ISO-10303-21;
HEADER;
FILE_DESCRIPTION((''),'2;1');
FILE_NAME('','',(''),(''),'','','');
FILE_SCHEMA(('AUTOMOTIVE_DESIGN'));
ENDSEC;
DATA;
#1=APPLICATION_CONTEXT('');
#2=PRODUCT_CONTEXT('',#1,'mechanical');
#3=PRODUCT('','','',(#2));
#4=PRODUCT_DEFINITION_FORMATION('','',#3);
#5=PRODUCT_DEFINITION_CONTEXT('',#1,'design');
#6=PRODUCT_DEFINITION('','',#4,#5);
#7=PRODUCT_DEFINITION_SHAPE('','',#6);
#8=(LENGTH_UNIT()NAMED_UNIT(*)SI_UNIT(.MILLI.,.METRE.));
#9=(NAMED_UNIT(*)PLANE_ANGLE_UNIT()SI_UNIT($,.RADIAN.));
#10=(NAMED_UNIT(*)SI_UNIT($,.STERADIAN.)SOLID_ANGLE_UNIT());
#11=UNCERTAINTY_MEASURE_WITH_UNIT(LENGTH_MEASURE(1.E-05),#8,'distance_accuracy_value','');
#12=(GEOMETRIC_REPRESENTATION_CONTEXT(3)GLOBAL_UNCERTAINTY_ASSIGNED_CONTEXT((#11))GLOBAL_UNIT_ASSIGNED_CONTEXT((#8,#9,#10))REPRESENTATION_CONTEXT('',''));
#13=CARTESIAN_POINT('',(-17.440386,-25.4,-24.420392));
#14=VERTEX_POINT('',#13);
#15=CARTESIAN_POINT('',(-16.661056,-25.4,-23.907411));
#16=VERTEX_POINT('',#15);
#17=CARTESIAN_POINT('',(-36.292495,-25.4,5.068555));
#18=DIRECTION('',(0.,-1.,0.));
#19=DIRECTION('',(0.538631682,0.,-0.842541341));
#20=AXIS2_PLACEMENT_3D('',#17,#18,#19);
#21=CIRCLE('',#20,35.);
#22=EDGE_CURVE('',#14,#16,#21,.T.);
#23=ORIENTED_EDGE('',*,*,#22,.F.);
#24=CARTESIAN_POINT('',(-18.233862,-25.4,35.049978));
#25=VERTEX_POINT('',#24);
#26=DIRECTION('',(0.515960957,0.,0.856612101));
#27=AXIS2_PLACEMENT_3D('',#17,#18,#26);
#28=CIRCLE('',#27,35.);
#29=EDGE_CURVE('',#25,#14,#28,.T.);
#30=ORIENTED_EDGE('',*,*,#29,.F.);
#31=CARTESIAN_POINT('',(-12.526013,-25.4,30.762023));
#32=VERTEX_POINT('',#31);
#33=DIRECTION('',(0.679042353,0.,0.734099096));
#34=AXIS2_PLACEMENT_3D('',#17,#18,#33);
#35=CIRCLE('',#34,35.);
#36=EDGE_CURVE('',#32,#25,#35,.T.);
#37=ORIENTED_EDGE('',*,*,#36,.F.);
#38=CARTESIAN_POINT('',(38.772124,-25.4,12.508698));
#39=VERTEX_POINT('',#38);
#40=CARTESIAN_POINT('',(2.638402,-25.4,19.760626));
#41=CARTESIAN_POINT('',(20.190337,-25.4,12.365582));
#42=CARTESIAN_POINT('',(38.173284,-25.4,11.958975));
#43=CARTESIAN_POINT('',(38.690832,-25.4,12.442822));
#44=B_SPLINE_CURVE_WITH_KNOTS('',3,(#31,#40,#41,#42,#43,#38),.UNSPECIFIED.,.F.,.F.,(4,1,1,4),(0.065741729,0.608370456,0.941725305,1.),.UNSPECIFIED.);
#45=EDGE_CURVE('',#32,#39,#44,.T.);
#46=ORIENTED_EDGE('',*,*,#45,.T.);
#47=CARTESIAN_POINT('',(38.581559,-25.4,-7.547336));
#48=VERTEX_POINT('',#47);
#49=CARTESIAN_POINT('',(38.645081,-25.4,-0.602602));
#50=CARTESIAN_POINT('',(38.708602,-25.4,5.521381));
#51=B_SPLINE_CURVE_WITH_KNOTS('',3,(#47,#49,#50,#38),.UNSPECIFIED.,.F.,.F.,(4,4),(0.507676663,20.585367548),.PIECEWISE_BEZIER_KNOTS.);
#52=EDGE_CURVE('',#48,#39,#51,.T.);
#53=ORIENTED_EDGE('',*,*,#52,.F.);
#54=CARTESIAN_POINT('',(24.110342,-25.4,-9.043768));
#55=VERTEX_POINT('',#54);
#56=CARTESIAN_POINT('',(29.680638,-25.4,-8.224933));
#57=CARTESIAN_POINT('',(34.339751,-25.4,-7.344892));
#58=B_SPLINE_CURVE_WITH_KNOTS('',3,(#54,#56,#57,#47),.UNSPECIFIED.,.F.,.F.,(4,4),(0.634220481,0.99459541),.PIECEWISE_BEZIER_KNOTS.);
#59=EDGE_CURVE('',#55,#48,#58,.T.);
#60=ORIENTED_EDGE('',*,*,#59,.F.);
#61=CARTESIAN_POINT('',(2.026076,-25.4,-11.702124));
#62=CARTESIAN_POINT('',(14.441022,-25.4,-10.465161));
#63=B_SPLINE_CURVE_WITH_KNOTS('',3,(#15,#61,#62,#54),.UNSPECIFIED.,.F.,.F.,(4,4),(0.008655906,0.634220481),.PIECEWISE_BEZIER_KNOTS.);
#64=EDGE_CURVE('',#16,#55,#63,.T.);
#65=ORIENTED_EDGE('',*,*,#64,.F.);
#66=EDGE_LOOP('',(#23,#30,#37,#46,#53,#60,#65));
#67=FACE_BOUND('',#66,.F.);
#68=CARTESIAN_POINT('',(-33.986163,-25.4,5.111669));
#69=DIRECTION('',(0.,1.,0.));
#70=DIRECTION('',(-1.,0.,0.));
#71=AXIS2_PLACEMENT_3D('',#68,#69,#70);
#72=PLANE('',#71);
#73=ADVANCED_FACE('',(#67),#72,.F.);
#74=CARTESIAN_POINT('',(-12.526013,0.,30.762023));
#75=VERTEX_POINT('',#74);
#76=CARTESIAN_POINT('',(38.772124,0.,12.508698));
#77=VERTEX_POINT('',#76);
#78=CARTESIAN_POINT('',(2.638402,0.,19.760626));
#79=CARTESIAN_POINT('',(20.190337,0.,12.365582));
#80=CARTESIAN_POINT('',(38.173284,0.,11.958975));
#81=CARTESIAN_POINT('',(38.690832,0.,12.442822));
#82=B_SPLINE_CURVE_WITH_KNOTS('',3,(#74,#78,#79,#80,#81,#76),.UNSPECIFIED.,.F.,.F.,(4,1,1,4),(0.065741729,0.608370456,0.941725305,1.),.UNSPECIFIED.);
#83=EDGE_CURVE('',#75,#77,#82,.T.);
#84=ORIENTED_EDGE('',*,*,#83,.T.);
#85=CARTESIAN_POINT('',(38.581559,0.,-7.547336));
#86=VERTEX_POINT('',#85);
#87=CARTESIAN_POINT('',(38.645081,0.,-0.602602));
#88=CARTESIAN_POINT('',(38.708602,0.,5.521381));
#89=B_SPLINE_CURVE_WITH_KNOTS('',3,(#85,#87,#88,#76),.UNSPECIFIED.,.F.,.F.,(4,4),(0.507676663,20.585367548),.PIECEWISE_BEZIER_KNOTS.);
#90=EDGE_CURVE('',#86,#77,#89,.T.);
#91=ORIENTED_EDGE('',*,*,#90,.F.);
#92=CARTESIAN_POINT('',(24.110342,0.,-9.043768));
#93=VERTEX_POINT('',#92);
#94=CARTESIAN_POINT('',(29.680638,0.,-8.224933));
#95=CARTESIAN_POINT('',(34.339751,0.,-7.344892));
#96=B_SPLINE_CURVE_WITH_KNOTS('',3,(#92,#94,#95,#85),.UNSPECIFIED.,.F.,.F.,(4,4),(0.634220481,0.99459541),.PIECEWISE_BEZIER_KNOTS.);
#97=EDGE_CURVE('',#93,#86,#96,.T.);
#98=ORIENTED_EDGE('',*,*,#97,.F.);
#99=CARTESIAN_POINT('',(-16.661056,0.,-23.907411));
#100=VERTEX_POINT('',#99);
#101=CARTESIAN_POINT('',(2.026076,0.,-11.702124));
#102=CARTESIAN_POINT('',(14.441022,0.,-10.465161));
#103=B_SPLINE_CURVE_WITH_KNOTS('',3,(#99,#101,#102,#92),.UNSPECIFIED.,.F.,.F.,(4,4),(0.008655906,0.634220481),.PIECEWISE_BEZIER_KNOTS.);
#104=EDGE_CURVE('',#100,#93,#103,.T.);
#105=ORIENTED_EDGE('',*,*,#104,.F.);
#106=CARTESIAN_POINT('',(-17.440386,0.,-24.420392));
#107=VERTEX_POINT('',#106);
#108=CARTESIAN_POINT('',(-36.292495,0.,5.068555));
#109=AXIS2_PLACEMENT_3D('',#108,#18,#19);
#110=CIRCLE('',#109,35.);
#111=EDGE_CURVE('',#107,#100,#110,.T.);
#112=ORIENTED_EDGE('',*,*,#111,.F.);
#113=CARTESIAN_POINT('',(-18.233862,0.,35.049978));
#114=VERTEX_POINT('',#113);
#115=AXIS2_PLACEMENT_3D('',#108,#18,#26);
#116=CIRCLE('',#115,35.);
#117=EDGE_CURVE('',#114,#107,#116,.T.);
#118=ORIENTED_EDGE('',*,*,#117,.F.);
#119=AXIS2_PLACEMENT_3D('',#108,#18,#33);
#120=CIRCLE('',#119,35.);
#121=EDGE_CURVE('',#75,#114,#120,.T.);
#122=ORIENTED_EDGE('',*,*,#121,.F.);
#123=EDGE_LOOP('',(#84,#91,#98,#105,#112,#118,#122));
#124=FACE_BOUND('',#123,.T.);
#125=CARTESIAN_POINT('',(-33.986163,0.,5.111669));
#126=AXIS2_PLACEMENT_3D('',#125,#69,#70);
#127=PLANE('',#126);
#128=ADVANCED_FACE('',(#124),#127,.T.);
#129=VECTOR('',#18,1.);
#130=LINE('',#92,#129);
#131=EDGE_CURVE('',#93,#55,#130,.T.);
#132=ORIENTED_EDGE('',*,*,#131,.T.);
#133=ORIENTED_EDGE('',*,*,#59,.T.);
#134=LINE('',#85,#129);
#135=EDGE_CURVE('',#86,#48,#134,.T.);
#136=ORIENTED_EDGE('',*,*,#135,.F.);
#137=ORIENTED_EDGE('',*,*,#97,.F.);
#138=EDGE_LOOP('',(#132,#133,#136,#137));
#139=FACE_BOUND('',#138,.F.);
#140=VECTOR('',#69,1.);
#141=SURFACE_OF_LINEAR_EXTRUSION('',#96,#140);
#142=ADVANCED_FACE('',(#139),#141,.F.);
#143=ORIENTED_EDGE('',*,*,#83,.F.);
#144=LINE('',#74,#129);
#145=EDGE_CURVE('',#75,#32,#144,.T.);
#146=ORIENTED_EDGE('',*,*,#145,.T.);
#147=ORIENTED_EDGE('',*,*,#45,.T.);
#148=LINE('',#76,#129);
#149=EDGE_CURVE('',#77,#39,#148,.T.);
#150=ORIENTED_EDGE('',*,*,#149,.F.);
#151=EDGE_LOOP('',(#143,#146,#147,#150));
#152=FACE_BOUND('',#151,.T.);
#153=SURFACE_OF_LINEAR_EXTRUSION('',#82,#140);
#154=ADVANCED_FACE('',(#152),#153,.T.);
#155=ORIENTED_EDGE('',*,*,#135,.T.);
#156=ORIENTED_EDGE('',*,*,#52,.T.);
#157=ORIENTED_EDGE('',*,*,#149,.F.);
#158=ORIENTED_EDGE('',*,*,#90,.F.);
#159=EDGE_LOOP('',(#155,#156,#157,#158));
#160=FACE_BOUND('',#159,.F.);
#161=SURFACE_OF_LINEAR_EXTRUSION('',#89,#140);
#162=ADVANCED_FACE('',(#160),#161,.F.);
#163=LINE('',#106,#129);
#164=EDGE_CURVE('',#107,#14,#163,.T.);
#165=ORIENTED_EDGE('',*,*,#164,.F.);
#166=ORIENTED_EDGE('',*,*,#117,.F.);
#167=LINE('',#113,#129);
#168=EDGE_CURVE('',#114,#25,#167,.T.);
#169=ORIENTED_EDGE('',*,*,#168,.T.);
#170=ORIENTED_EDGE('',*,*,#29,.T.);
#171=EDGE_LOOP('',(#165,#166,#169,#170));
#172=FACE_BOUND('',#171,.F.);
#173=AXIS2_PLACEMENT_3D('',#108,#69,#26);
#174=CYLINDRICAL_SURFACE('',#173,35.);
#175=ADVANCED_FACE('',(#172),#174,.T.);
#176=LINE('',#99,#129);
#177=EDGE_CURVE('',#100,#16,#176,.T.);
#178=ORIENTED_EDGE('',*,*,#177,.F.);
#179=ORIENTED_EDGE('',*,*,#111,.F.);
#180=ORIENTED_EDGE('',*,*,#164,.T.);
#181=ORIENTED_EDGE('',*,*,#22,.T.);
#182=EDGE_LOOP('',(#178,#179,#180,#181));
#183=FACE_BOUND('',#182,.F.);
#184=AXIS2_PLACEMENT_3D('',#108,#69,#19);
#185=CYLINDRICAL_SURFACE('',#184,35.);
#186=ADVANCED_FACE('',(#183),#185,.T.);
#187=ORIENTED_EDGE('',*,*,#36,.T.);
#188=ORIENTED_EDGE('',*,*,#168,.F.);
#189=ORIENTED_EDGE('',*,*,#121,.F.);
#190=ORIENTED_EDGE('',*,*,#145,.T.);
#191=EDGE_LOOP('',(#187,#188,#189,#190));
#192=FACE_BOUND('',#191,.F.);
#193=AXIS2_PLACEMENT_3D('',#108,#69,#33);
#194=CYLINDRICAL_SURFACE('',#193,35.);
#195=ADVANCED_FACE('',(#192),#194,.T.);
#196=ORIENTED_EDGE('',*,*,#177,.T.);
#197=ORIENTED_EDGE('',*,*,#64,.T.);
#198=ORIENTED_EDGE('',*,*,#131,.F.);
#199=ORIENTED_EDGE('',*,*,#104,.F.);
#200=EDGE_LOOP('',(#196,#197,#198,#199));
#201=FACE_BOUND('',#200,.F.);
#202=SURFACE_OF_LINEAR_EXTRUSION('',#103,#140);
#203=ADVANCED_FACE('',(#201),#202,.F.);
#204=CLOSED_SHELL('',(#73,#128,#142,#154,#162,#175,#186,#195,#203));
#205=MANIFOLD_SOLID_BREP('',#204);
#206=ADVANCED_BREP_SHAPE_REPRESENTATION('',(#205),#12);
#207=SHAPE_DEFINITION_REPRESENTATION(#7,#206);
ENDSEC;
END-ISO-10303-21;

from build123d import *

# Parameters (mm, degrees)
F1_DEPTH = 25.4


with BuildPart() as f1:
    # F0 (on Front) → F1 (new body)
    with BuildSketch(Plane.XZ):
        with BuildLine():
            add(Edge.make_bspline(
                [(-18.2338618332, 35.049978312), (-16.2634742331, 33.5219960414), (-14.3632449685, 32.0948882514), (-12.5260129681, 30.7620231507)],
                knots=[0, 0, 0, 0, 0.065741729, 0.065741729, 0.065741729, 0.065741729], degree=3))
            ThreePointArc((-18.2338618332, 35.049978312), (-71.2893804123, 4.6016135845), (-17.4403864611, -24.4203921477))
            add(Edge.make_bspline(
                [(-17.4403864611, -24.4203921477), (-17.179402441, -24.2472786453), (-16.9196286438, -24.0762946974), (-16.6610557268, -23.9074107575)],
                knots=[0, 0, 0, 0, 0.0086559059, 0.0086559059, 0.0086559059, 0.0086559059], degree=3))
            ThreePointArc((-16.6610557268, -23.9074107575), (-5.3724339888, -11.3311344475), (-1.2924953236, 5.0685547891))
            ThreePointArc((-1.2924953236, 5.0685547891), (-4.2236094492, 19.0894876674), (-12.5260129681, 30.7620231507))
        make_face()
        with BuildLine():
            ThreePointArc((-12.5260129681, 30.7620231507), (-15.2703232487, 33.0519120082), (-18.2338618332, 35.049978312))
            add(Edge.make_bspline(
                [(-18.2338618332, 35.049978312), (-16.2634742331, 33.5219960414), (-14.3632449685, 32.0948882514), (-12.5260129681, 30.7620231507)],
                knots=[0, 0, 0, 0, 0.065741729, 0.065741729, 0.065741729, 0.065741729], degree=3))
        make_face()
        with BuildLine():
            add(Edge.make_bspline(
                [(-17.4403864611, -24.4203921477), (-17.179402441, -24.2472786453), (-16.9196286438, -24.0762946974), (-16.6610557268, -23.9074107575)],
                knots=[0, 0, 0, 0, 0.0086559059, 0.0086559059, 0.0086559059, 0.0086559059], degree=3))
            ThreePointArc((-17.4403864611, -24.4203921477), (-17.0490116738, -24.1664984351), (-16.6610557268, -23.9074107575))
        make_face()
        with BuildLine():
            add(Edge.make_bspline(
                [(-12.5260129681, 30.7620231507), (2.638402042, 19.7606256484), (20.1903372376, 12.3655817594), (38.1732838608, 11.9589753306), (38.6908322584, 12.4428219154), (38.7721241334, 12.5086976901)],
                knots=[0.065741729, 0.065741729, 0.065741729, 0.065741729, 0.6083704565, 0.9417253051, 1, 1, 1, 1], degree=3))
            ThreePointArc((-12.5260129681, 30.7620231507), (-4.2236094492, 19.0894876674), (-1.2924953236, 5.0685547891))
            ThreePointArc((-1.2924953236, 5.0685547891), (-5.3724339888, -11.3311344475), (-16.6610557268, -23.9074107575))
            add(Edge.make_bspline(
                [(-16.6610557268, -23.9074107575), (2.0260763524, -11.7021244239), (14.4410223527, -10.4651605814), (24.1103417725, -9.0437679707)],
                knots=[0.0086559059, 0.0086559059, 0.0086559059, 0.0086559059, 0.6342204815, 0.6342204815, 0.6342204815, 0.6342204815], degree=3))
            add(Edge.make_bspline(
                [(24.1103417725, -9.0437679707), (29.6806384765, -8.2249328253), (34.3397507009, -7.3448917488), (38.5815591641, -7.5473355981)],
                knots=[0.6342204815, 0.6342204815, 0.6342204815, 0.6342204815, 0.9945954099, 0.9945954099, 0.9945954099, 0.9945954099], degree=3))
            add(Edge.make_bspline(
                [(38.5815591641, -7.5473355981), (38.6450808205, -0.6026015768), (38.708602477, 5.5213805001), (38.7721241334, 12.5086976901)],
                knots=[0.5076766633, 0.5076766633, 0.5076766633, 0.5076766633, 20.5853675478, 20.5853675478, 20.5853675478, 20.5853675478], degree=3))
        make_face()
    extrude(amount=F1_DEPTH)


solid = f1.part
